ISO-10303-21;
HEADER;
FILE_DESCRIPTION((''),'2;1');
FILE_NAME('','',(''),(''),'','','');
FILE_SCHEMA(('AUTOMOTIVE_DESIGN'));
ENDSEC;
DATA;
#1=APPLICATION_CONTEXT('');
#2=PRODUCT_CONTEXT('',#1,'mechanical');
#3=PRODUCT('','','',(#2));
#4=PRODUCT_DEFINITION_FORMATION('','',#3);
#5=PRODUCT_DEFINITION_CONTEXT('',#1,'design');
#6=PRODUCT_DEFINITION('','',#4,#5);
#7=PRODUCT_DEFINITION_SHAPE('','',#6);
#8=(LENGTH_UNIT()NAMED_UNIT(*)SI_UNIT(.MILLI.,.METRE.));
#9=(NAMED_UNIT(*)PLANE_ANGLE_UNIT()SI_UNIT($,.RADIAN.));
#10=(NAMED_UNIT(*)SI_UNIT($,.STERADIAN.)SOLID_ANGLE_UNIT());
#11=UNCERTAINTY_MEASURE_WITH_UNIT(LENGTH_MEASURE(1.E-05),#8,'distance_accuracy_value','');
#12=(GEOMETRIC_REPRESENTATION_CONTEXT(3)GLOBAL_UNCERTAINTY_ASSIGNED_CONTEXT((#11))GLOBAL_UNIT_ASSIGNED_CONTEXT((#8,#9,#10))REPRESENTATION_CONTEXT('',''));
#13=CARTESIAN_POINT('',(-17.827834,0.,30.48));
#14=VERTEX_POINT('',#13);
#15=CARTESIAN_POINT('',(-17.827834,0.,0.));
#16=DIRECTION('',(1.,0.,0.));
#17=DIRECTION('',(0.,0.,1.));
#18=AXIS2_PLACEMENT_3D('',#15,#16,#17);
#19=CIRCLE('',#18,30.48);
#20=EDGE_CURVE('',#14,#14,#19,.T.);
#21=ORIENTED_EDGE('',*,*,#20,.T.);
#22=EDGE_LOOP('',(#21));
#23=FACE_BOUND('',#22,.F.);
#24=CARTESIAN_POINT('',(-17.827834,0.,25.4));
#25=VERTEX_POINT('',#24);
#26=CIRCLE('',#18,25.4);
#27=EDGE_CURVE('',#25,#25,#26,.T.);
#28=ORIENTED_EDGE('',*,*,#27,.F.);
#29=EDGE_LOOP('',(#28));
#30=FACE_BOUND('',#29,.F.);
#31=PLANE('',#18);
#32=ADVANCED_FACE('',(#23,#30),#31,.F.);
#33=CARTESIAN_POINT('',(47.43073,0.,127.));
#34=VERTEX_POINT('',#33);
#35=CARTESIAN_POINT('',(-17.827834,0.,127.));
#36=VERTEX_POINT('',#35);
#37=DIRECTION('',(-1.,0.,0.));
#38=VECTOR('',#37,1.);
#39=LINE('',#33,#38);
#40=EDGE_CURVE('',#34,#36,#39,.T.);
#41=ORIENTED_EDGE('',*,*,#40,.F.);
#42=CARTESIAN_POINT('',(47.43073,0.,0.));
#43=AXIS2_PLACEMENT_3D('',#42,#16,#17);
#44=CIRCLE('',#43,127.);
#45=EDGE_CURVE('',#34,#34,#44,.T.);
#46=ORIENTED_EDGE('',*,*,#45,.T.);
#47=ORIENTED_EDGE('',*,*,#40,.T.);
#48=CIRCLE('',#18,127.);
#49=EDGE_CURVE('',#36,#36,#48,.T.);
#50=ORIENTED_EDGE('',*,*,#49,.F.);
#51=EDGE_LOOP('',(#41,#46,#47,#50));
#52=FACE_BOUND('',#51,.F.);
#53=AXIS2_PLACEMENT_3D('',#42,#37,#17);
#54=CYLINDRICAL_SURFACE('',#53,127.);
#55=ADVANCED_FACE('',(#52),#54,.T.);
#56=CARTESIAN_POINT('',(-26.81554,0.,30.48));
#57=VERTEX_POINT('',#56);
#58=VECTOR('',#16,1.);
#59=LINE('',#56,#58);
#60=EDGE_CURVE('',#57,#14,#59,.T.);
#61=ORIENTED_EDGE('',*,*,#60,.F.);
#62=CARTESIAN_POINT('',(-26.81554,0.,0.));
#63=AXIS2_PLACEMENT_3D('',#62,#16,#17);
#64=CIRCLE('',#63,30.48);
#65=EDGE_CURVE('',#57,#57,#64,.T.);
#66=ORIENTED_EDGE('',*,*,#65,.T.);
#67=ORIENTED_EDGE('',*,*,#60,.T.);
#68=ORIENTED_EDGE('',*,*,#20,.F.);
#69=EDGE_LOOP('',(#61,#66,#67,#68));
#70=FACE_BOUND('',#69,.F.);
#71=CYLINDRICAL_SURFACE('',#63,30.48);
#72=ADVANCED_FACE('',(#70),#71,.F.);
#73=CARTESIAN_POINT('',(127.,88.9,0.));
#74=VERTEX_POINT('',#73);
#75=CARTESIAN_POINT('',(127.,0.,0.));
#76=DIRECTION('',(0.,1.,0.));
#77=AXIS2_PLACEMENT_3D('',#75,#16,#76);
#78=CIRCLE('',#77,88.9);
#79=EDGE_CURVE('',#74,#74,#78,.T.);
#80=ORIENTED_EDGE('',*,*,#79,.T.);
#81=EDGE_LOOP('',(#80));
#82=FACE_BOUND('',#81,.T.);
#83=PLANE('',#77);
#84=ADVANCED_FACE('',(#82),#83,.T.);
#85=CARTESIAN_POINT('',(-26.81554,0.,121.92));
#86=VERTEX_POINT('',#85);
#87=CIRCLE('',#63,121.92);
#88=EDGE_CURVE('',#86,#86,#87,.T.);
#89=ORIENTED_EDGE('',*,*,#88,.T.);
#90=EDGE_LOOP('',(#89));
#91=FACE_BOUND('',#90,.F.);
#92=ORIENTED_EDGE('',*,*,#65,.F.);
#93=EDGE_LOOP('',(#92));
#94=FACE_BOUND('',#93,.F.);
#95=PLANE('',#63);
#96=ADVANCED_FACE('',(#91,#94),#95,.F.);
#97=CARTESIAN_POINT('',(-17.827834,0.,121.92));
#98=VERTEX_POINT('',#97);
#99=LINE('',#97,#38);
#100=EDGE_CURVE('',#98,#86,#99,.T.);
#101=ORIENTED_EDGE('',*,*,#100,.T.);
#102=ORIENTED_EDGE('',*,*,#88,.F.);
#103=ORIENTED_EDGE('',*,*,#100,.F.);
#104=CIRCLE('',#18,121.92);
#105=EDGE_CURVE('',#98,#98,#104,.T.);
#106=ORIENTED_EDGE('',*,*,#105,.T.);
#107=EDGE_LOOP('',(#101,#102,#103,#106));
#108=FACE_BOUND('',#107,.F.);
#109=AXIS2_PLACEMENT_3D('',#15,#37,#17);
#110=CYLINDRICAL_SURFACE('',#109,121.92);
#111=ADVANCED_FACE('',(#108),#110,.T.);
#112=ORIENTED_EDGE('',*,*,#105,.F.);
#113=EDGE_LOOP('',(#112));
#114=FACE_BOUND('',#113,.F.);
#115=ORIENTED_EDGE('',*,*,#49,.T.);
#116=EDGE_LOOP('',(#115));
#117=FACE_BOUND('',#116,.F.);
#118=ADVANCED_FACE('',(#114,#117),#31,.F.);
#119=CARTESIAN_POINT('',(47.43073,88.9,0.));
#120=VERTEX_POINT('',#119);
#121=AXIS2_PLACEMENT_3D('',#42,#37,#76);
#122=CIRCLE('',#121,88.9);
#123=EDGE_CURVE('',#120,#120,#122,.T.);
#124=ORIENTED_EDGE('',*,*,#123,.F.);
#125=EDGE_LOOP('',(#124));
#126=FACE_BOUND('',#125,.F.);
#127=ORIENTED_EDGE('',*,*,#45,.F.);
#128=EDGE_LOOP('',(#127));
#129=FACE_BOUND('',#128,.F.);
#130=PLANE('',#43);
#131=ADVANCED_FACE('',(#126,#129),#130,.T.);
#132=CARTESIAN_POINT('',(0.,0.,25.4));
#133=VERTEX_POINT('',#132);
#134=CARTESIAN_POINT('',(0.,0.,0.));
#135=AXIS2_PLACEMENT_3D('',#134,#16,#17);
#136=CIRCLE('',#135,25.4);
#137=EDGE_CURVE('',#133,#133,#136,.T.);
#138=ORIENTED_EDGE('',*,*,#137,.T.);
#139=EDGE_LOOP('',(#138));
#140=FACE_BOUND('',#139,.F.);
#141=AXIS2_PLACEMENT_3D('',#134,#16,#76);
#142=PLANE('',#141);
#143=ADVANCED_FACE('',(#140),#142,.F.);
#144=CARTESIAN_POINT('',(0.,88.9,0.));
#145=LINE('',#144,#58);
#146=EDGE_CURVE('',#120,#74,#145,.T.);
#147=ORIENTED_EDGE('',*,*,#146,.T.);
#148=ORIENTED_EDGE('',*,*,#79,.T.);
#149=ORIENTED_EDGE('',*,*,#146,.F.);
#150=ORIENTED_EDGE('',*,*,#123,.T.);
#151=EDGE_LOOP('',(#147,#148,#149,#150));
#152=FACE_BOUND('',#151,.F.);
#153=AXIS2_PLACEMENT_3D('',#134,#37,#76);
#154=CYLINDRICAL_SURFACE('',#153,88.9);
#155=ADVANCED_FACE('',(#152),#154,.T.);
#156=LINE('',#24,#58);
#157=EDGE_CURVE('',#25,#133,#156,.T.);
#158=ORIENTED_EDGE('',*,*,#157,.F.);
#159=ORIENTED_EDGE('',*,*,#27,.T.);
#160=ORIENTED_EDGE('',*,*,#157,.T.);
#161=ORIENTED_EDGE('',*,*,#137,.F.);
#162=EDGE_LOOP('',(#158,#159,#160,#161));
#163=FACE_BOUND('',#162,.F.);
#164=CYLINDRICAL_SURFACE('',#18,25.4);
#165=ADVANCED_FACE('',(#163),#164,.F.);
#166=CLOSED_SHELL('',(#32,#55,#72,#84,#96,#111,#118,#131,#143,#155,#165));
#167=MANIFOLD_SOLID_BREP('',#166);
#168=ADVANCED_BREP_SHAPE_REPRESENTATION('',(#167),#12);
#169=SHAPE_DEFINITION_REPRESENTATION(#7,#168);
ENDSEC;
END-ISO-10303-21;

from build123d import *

# Parameters (mm, degrees)
F2_R     = 88.9
F4_DEPTH = 127


# Not quite as in the source:
# - the program builds the solid bodies; features that only make, move or delete a surface that nothing else refers to are left out


with BuildPart() as f1:
    # F0 (on Front) → F1 (revolve)
    with BuildSketch(Plane.XZ):
        Polygon((-17.8278337446, 25.4), (0, 25.4), (55.6368945653, 25.4), (55.6368945653, 50.8), (47.4307299643, 50.8), (47.4307299643, 127), (-17.8278337446, 127), (-17.8278337446, 121.92), (-26.8155404944, 121.92), (-26.8155404944, 30.48), (-17.8278337446, 30.48), align=None)
    revolve(axis=Axis((17.3414491085, 0, 0), (1, 0, 0)))

    # F2 (on Right) → F4 (join)
    with BuildSketch(Plane.YZ):
        Circle(F2_R)
    extrude(amount=F4_DEPTH)


solid = f1.part
